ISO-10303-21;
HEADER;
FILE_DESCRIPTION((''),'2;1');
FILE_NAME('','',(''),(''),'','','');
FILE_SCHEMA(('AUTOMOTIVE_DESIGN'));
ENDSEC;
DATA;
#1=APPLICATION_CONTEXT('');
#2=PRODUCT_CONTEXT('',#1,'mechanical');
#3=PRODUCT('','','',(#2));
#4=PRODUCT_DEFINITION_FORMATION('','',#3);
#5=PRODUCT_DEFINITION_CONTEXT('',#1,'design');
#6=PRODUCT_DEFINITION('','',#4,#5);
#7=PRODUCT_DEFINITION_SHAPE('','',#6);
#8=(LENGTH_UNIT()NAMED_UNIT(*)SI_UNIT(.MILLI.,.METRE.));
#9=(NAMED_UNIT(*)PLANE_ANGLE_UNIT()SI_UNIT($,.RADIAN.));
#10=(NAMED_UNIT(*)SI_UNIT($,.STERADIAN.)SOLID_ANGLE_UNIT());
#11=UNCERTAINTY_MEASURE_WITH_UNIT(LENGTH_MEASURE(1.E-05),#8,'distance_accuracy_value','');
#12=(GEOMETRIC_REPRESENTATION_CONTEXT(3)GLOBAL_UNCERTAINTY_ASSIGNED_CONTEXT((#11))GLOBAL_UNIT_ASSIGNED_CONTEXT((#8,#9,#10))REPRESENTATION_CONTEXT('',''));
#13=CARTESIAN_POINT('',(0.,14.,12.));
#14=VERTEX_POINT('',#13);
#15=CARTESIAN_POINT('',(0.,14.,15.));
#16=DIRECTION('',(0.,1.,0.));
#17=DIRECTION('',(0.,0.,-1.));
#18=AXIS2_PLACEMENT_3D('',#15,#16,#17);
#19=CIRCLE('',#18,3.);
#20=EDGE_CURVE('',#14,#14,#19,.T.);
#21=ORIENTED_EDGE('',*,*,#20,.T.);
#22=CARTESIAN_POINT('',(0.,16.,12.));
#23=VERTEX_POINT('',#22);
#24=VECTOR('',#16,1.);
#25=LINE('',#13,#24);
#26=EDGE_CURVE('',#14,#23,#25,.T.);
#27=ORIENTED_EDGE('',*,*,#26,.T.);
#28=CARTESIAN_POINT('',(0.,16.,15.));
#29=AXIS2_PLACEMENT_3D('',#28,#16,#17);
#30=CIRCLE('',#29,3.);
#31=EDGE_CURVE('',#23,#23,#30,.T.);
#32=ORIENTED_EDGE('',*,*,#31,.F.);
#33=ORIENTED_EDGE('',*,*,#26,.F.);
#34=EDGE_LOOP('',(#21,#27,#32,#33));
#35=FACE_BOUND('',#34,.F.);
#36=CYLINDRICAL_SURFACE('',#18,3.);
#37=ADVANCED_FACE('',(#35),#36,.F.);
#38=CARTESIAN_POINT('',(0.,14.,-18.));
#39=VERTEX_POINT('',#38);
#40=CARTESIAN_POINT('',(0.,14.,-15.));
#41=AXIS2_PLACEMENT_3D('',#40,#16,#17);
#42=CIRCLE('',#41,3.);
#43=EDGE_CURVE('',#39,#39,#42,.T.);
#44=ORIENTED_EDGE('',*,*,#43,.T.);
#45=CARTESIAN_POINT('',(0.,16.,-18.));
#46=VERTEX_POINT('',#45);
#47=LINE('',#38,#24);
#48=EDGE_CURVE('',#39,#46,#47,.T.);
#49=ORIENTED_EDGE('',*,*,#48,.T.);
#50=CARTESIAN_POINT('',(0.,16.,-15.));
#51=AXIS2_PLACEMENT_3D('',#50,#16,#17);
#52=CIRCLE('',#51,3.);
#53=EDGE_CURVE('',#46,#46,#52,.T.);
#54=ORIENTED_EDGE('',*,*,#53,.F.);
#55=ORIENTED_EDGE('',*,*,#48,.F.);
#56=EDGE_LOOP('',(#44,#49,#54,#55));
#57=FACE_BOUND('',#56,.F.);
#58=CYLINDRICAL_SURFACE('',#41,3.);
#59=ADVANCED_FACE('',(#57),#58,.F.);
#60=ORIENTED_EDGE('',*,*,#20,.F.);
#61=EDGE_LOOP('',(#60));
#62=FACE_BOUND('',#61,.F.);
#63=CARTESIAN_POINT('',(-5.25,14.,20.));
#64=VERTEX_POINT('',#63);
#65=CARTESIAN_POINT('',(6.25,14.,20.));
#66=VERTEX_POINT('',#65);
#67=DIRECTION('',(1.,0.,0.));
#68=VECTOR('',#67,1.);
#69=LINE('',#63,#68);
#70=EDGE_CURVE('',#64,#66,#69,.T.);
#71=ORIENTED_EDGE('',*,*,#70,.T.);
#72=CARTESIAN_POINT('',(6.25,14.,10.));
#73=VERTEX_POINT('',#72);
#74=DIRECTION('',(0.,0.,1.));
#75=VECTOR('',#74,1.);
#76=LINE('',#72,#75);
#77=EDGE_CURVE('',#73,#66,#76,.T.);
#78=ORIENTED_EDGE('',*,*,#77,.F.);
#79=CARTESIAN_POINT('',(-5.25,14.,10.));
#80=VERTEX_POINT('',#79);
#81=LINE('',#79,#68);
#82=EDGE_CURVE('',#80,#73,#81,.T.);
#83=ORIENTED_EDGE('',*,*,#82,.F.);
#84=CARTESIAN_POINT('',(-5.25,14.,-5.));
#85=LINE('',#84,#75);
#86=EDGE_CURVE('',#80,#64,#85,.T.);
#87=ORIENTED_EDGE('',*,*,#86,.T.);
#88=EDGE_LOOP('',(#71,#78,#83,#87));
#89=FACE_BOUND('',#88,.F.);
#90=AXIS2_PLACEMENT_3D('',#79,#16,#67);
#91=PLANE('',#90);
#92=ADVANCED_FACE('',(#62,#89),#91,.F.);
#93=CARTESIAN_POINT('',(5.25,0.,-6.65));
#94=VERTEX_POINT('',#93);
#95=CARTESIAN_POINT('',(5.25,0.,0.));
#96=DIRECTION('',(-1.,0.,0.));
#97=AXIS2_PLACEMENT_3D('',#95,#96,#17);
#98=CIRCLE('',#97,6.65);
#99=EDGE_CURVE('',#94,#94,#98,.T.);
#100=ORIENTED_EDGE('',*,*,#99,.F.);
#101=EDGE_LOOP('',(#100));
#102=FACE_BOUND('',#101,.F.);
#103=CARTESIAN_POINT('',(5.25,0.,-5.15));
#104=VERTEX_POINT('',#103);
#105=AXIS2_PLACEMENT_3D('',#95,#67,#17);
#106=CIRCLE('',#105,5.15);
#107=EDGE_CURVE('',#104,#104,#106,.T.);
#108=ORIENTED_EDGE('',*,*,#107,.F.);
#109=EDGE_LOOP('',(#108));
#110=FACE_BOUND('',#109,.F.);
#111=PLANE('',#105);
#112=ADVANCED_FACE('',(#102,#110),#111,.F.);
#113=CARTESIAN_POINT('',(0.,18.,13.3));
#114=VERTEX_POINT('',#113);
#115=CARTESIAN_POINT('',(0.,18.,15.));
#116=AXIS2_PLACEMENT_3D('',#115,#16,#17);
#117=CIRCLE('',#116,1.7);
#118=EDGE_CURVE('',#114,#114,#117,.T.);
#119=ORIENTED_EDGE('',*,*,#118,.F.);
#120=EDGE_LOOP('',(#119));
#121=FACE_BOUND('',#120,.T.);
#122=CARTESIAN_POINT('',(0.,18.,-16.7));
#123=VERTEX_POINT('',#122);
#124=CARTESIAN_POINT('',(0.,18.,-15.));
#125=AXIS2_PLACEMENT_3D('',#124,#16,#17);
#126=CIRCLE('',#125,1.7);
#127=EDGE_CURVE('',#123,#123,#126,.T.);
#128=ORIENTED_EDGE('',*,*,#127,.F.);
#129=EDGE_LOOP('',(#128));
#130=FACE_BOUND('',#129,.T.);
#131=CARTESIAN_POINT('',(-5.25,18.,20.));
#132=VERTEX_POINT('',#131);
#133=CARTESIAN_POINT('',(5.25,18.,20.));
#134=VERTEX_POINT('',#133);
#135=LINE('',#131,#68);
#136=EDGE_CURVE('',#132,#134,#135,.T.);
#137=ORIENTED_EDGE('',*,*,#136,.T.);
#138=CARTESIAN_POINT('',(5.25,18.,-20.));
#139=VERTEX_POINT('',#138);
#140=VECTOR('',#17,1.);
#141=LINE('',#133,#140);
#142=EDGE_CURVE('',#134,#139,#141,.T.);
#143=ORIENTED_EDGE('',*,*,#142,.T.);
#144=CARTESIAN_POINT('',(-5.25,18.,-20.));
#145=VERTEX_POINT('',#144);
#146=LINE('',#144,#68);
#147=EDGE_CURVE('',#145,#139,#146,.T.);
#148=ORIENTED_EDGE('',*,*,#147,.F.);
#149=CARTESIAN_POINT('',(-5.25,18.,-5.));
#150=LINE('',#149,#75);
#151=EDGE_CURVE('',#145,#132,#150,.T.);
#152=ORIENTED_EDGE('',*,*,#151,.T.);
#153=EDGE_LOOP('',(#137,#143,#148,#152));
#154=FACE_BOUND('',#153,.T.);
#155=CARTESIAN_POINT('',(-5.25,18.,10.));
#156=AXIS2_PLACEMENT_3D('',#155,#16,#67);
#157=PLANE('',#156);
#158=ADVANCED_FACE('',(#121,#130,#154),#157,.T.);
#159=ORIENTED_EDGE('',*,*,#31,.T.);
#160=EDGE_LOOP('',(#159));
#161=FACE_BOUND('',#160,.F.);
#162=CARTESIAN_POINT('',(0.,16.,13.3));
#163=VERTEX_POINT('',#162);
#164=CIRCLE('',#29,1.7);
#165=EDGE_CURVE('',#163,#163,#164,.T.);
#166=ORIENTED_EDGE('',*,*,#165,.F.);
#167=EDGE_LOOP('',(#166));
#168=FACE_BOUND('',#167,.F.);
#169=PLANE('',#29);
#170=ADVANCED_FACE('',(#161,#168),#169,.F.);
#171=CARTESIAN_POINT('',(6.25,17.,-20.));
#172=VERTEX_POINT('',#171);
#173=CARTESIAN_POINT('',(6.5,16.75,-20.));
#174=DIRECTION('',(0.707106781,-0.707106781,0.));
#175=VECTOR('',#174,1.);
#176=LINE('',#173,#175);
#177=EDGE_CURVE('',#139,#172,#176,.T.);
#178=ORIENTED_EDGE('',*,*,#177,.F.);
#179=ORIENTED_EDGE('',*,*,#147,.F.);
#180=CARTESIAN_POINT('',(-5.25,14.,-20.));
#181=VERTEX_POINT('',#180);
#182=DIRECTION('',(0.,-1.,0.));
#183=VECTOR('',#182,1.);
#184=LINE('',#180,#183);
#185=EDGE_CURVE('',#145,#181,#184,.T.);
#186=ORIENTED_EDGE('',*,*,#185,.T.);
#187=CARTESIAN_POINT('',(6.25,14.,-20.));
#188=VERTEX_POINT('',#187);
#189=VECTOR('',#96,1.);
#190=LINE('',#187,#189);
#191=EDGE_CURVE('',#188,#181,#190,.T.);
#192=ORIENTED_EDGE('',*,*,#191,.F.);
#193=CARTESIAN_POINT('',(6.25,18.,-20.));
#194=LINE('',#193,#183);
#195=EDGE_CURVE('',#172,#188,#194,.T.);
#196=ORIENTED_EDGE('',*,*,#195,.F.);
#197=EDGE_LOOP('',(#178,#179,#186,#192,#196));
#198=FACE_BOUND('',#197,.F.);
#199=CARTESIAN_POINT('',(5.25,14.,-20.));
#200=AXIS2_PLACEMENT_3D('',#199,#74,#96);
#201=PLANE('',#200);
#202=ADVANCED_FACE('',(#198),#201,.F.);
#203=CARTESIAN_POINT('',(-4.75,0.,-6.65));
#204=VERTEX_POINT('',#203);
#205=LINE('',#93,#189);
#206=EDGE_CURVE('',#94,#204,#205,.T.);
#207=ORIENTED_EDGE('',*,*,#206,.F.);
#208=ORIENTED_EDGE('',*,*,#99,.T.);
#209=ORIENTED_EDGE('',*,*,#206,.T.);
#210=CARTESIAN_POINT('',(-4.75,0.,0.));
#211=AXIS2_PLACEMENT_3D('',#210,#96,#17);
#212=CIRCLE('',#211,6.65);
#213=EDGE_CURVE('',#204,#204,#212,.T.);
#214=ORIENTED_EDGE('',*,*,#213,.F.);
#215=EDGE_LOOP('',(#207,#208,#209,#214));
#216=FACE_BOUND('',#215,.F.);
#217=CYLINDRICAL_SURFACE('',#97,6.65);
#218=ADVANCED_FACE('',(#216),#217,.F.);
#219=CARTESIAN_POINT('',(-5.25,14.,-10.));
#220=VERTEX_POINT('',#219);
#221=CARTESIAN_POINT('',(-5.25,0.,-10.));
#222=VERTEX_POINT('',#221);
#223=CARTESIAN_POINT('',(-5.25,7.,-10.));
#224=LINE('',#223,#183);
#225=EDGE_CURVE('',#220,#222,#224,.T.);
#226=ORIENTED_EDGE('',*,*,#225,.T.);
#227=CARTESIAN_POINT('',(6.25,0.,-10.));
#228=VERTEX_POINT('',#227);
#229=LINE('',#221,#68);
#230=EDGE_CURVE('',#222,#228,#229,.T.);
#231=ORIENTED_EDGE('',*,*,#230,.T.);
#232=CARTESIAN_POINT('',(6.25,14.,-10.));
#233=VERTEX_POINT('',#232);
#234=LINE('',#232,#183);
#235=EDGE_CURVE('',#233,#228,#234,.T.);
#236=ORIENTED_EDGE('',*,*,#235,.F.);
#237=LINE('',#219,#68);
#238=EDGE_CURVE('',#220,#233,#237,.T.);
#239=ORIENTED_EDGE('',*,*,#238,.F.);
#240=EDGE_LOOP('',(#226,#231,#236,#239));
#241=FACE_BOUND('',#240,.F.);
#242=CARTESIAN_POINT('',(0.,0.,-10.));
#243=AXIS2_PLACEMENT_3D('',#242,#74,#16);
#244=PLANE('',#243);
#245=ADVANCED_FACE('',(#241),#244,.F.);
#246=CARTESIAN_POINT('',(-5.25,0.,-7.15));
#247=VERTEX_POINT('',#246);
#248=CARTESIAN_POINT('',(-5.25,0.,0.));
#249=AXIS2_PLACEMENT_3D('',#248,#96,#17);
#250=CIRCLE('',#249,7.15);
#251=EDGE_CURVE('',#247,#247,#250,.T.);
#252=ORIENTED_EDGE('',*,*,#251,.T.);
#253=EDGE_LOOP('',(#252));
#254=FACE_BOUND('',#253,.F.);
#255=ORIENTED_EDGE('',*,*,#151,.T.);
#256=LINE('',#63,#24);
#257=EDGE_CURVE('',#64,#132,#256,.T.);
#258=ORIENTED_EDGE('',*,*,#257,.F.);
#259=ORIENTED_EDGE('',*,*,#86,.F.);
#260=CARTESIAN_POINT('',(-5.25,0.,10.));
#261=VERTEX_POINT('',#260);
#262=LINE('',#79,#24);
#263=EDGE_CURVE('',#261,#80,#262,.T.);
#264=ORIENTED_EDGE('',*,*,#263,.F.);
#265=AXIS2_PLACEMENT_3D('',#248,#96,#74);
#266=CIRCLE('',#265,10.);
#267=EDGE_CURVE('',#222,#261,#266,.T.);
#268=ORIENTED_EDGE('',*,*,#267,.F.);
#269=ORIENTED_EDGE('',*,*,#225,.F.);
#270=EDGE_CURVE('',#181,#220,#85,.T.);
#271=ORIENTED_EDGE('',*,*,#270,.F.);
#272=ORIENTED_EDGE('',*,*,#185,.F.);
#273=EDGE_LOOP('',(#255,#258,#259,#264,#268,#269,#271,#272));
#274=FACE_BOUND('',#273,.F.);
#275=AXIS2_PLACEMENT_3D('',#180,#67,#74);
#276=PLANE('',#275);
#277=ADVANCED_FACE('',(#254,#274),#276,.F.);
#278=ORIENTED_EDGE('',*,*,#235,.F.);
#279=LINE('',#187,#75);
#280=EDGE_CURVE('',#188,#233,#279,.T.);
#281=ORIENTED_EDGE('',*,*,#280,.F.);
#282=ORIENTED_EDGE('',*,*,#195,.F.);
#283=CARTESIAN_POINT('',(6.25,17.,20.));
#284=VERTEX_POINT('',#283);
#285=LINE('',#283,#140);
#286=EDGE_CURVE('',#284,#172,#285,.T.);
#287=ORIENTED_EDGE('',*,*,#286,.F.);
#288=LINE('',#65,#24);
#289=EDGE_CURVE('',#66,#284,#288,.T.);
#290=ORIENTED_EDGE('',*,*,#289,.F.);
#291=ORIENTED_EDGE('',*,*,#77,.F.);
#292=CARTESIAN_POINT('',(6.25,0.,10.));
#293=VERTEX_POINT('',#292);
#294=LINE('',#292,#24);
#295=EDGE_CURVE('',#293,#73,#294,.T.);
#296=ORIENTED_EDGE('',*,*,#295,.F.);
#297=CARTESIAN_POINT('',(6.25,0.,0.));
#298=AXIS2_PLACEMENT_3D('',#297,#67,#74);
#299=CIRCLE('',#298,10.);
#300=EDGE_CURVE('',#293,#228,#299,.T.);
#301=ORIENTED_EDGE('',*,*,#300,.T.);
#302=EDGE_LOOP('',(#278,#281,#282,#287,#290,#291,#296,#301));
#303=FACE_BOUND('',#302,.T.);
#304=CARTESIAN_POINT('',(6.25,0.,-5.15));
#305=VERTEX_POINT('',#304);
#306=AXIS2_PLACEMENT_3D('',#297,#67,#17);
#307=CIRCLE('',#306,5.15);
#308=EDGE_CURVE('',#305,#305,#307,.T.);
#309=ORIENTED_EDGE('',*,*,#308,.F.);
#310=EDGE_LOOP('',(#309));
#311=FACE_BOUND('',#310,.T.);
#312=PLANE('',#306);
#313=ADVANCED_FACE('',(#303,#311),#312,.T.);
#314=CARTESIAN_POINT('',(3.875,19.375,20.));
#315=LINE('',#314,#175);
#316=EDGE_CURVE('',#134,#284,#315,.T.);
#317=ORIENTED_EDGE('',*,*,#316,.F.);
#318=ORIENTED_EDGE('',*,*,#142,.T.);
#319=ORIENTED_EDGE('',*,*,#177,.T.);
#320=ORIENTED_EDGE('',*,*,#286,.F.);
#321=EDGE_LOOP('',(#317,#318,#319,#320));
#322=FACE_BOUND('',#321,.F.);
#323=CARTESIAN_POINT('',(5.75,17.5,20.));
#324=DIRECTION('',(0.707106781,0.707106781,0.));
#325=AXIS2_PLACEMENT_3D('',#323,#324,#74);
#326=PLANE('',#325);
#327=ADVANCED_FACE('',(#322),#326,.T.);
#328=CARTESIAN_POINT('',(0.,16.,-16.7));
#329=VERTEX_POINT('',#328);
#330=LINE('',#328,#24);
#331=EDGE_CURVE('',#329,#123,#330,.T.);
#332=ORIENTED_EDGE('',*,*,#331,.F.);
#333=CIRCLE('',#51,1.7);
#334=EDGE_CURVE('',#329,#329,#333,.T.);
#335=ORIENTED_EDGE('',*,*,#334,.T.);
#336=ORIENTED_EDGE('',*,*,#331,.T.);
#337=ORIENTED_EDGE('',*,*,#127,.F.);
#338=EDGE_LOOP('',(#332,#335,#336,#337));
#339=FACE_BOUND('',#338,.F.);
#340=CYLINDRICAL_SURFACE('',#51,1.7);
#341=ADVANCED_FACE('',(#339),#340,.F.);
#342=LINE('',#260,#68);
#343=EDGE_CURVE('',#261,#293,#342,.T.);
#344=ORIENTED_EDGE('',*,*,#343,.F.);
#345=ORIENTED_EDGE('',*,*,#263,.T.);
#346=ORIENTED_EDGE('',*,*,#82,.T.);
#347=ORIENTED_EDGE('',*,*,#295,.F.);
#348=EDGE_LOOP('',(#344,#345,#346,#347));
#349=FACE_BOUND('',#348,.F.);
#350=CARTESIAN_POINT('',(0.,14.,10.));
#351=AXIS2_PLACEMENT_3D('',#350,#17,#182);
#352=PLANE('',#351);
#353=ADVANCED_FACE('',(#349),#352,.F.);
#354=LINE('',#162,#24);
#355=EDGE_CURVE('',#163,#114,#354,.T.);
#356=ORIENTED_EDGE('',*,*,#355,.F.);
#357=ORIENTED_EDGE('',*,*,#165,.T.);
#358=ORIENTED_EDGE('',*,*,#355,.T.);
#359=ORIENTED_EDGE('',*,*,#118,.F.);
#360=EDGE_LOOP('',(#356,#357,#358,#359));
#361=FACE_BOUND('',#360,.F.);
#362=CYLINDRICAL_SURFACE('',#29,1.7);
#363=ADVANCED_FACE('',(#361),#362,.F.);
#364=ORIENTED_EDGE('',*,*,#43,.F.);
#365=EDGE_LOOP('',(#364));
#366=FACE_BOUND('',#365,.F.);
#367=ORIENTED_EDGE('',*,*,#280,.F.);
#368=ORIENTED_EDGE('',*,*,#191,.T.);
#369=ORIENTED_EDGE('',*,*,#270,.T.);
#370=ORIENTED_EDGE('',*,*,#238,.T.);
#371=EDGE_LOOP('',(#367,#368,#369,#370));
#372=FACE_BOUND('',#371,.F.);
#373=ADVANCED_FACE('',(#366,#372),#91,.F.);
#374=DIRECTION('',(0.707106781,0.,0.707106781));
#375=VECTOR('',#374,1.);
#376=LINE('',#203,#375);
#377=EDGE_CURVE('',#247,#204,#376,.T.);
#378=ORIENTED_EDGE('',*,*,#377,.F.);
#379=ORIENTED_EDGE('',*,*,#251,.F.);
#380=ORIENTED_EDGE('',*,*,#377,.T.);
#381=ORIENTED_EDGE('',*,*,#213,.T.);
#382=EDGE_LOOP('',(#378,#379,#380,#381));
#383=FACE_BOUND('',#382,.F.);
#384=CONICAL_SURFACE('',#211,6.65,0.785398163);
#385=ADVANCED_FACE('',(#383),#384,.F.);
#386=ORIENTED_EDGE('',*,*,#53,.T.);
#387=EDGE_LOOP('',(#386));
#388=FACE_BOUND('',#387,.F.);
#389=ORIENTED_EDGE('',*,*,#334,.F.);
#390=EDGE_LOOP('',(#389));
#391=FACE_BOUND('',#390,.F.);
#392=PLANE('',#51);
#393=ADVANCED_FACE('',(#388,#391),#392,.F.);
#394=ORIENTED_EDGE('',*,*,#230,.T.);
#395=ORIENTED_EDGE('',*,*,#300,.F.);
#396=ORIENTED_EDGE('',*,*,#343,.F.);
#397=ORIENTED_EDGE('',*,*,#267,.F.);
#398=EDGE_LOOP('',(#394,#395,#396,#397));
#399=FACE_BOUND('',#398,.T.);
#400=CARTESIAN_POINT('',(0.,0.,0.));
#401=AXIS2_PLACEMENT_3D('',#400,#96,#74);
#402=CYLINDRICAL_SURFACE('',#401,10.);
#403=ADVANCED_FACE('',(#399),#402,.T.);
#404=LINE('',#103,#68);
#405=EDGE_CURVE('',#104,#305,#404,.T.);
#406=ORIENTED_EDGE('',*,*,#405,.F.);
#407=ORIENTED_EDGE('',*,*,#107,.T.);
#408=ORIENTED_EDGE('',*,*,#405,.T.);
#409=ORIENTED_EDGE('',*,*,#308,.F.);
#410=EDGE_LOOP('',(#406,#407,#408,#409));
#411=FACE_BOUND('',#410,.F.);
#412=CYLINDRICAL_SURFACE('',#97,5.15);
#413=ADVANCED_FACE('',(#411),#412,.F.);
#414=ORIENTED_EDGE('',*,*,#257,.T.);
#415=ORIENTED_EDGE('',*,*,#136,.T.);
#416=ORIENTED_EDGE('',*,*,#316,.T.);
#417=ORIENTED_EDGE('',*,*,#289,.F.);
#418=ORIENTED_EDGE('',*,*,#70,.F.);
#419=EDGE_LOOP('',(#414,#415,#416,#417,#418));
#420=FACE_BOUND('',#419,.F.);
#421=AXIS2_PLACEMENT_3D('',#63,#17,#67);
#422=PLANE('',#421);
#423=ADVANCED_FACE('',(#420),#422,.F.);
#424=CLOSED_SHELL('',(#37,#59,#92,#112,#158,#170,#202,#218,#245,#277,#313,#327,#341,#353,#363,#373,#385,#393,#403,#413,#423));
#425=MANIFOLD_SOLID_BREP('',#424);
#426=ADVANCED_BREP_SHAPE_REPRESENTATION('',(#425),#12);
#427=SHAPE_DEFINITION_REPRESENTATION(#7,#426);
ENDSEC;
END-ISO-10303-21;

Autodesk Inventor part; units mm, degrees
ref_plane "YZ Plane" through (0, 0, 0) normal (1, 0, 0) x (0, 1, 0)
ref_plane "XZ Plane" through (0, 0, 0) normal (0, 1, 0) x (-1, 0, 0)
ref_plane "XY Plane" through (0, 0, 0) normal (0, 0, 1) x (1, 0, 0)
sketch "Sketch1" plane through (0, 0, 0) normal (1, 0, 0) x (0, 1, 0)
  line L0 (0, 0) -> (14, 0) construction
  line L1 (0, -10) -> (14, -10)
  line L2 (14, 10) -> (0, 10)
  arc A0 (0, 10) -> (0, -10) centre (0, 0) ccw
  arc A1 (14, -10) -> (14, 10) centre (14, 0) ccw construction
  line L3 (14, 10) -> (14, -10)
  point P0 (7, 0)
  dimension "d2" = 20
  dimension "d1" = 14
extrude "Extrusion1" add sketch "Sketch1" along normal mid plane 10.5
sketch "Sketch2" plane through (-5.25, 14, 10) normal (0, 1, 0) x (1, 0, 0)
  line L0 (0, -10) -> (10.5, -10)
  line L1 (10.5, -10) -> (10.5, 30)
  line L2 (10.5, 30) -> (0, 30)
  line L3 (0, 30) -> (0, -10)
  line L4 (0, 0) -> (0, 20) construction
  line L5 (0, 20) -> (10.5, 20) construction
  line L6 (10.5, 20) -> (10.5, 0) construction
  line L7 (10.5, 0) -> (0, 0) construction
  line L8 (0, 0) -> (0, 20) construction
  line L9 (10.5, 20) -> (10.5, 0) construction
  line L10 (0, 10) -> (10.5, 10) construction
  point P0 (5.25, 10)
  dimension "d28" = 40
extrude "Extrusion2" add sketch "Sketch2" along normal blind 4
sketch "Sketch3" plane through (-5.25, 14, 10) normal (0, -1, 0) x (1, 0, 0)
  line L0 (10.5, -30) -> (0, -30) projected
  line L1 (0, -30) -> (0, -20) projected
  line L2 (0, -20) -> (0, 0) projected
  line L3 (0, 0) -> (0, 10) projected
  line L4 (0, 10) -> (10.5, 10) projected
  line L5 (10.5, 10) -> (10.5, 0) projected
  line L6 (10.5, 0) -> (10.5, -20) projected
  line L7 (10.5, -20) -> (10.5, -30) projected
  line L8 (10.5, -20) -> (0, -20) projected
  line L9 (0, 0) -> (10.5, 0) projected
  line L10 (0, 10) -> (10.5, 10) projected
  point P0 (5.25, -10)
  point P1 (5.25, 5)
  point P2 (5.25, -25)
  point P3 (5.25, 10)
  point P4 (5.25, 10)
  point P5 (5.25, 10)
  dimension "d30" = 5
  dimension "d31" = 5
hole "Hole1" at (0, 14, 15) at (0, 14, -15) direction (0, 1, 0) diameter 3.4 end through all counterbore diameter 6 counterbore depth 2
sketch "Sketch5" plane through (5.25, 0, 0) normal (1, 0, 0) x (0, 0, -1)
  arc A0 (-10, 0) -> (10, 0) centre (0, 0) ccw projected
hole "Hole3" at (5.25, 0, 0) direction (-1, 0, 0) diameter 13 end through all
thicken "Thicken1" operation add thickness 0.15 both sides no extend neighbours yes toward (0, 0.0804666, -0.9967573) faces at (1.75, 0.523, -6.4789)
sketch "Sketch6" plane through (5.25, 0, 0) normal (1, 0, 0) x (0, 0, -1)
  circle A0 centre (0, 0) radius 6.65 construction
  line L0 (20, 18) -> (20, 14) projected
  line L1 (20, 14) -> (10, 14) projected
  line L2 (10, 14) -> (10, 0) projected
  arc A1 (-10, 0) -> (10, 0) centre (0, 0) ccw projected
  line L3 (-10, 0) -> (-10, 14) projected
  line L4 (-10, 14) -> (-20, 14) projected
  line L5 (-20, 14) -> (-20, 18) projected
  line L6 (-20, 18) -> (20, 18) projected
  circle A2 centre (0, 0) radius 6.65 projected
  line L7 (20, 18) -> (20, 14) projected
  line L8 (20, 14) -> (10, 14) projected
  line L9 (10, 14) -> (10, 0) projected
  arc A3 (-10, 0) -> (10, 0) centre (0, 0) ccw projected
  line L10 (-10, 0) -> (-10, 14) projected
  line L11 (-10, 14) -> (-20, 14) projected
  line L12 (-20, 14) -> (-20, 18) projected
  line L13 (-20, 18) -> (20, 18) projected
  circle A4 centre (0, 0) radius 5.15
  dimension "d37" = 1.5
extrude "Extrusion3" add sketch "Sketch6" along normal blind 1 contours L0 L1 L2 A1 L3 L4 L5 L6 | A2
chamfer "Chamfer2" distance 0.5 angle 45 1 edges at (-5.25, 0, 6.65)
chamfer "Chamfer3" distance 1 angle 45 1 edges at (6.25, 18, 0)
equation "\"d31\" = d30"
equation "\"d21\" = diameter"
equation "\"diameter\" = 13"
properties part number "bearing holder"
